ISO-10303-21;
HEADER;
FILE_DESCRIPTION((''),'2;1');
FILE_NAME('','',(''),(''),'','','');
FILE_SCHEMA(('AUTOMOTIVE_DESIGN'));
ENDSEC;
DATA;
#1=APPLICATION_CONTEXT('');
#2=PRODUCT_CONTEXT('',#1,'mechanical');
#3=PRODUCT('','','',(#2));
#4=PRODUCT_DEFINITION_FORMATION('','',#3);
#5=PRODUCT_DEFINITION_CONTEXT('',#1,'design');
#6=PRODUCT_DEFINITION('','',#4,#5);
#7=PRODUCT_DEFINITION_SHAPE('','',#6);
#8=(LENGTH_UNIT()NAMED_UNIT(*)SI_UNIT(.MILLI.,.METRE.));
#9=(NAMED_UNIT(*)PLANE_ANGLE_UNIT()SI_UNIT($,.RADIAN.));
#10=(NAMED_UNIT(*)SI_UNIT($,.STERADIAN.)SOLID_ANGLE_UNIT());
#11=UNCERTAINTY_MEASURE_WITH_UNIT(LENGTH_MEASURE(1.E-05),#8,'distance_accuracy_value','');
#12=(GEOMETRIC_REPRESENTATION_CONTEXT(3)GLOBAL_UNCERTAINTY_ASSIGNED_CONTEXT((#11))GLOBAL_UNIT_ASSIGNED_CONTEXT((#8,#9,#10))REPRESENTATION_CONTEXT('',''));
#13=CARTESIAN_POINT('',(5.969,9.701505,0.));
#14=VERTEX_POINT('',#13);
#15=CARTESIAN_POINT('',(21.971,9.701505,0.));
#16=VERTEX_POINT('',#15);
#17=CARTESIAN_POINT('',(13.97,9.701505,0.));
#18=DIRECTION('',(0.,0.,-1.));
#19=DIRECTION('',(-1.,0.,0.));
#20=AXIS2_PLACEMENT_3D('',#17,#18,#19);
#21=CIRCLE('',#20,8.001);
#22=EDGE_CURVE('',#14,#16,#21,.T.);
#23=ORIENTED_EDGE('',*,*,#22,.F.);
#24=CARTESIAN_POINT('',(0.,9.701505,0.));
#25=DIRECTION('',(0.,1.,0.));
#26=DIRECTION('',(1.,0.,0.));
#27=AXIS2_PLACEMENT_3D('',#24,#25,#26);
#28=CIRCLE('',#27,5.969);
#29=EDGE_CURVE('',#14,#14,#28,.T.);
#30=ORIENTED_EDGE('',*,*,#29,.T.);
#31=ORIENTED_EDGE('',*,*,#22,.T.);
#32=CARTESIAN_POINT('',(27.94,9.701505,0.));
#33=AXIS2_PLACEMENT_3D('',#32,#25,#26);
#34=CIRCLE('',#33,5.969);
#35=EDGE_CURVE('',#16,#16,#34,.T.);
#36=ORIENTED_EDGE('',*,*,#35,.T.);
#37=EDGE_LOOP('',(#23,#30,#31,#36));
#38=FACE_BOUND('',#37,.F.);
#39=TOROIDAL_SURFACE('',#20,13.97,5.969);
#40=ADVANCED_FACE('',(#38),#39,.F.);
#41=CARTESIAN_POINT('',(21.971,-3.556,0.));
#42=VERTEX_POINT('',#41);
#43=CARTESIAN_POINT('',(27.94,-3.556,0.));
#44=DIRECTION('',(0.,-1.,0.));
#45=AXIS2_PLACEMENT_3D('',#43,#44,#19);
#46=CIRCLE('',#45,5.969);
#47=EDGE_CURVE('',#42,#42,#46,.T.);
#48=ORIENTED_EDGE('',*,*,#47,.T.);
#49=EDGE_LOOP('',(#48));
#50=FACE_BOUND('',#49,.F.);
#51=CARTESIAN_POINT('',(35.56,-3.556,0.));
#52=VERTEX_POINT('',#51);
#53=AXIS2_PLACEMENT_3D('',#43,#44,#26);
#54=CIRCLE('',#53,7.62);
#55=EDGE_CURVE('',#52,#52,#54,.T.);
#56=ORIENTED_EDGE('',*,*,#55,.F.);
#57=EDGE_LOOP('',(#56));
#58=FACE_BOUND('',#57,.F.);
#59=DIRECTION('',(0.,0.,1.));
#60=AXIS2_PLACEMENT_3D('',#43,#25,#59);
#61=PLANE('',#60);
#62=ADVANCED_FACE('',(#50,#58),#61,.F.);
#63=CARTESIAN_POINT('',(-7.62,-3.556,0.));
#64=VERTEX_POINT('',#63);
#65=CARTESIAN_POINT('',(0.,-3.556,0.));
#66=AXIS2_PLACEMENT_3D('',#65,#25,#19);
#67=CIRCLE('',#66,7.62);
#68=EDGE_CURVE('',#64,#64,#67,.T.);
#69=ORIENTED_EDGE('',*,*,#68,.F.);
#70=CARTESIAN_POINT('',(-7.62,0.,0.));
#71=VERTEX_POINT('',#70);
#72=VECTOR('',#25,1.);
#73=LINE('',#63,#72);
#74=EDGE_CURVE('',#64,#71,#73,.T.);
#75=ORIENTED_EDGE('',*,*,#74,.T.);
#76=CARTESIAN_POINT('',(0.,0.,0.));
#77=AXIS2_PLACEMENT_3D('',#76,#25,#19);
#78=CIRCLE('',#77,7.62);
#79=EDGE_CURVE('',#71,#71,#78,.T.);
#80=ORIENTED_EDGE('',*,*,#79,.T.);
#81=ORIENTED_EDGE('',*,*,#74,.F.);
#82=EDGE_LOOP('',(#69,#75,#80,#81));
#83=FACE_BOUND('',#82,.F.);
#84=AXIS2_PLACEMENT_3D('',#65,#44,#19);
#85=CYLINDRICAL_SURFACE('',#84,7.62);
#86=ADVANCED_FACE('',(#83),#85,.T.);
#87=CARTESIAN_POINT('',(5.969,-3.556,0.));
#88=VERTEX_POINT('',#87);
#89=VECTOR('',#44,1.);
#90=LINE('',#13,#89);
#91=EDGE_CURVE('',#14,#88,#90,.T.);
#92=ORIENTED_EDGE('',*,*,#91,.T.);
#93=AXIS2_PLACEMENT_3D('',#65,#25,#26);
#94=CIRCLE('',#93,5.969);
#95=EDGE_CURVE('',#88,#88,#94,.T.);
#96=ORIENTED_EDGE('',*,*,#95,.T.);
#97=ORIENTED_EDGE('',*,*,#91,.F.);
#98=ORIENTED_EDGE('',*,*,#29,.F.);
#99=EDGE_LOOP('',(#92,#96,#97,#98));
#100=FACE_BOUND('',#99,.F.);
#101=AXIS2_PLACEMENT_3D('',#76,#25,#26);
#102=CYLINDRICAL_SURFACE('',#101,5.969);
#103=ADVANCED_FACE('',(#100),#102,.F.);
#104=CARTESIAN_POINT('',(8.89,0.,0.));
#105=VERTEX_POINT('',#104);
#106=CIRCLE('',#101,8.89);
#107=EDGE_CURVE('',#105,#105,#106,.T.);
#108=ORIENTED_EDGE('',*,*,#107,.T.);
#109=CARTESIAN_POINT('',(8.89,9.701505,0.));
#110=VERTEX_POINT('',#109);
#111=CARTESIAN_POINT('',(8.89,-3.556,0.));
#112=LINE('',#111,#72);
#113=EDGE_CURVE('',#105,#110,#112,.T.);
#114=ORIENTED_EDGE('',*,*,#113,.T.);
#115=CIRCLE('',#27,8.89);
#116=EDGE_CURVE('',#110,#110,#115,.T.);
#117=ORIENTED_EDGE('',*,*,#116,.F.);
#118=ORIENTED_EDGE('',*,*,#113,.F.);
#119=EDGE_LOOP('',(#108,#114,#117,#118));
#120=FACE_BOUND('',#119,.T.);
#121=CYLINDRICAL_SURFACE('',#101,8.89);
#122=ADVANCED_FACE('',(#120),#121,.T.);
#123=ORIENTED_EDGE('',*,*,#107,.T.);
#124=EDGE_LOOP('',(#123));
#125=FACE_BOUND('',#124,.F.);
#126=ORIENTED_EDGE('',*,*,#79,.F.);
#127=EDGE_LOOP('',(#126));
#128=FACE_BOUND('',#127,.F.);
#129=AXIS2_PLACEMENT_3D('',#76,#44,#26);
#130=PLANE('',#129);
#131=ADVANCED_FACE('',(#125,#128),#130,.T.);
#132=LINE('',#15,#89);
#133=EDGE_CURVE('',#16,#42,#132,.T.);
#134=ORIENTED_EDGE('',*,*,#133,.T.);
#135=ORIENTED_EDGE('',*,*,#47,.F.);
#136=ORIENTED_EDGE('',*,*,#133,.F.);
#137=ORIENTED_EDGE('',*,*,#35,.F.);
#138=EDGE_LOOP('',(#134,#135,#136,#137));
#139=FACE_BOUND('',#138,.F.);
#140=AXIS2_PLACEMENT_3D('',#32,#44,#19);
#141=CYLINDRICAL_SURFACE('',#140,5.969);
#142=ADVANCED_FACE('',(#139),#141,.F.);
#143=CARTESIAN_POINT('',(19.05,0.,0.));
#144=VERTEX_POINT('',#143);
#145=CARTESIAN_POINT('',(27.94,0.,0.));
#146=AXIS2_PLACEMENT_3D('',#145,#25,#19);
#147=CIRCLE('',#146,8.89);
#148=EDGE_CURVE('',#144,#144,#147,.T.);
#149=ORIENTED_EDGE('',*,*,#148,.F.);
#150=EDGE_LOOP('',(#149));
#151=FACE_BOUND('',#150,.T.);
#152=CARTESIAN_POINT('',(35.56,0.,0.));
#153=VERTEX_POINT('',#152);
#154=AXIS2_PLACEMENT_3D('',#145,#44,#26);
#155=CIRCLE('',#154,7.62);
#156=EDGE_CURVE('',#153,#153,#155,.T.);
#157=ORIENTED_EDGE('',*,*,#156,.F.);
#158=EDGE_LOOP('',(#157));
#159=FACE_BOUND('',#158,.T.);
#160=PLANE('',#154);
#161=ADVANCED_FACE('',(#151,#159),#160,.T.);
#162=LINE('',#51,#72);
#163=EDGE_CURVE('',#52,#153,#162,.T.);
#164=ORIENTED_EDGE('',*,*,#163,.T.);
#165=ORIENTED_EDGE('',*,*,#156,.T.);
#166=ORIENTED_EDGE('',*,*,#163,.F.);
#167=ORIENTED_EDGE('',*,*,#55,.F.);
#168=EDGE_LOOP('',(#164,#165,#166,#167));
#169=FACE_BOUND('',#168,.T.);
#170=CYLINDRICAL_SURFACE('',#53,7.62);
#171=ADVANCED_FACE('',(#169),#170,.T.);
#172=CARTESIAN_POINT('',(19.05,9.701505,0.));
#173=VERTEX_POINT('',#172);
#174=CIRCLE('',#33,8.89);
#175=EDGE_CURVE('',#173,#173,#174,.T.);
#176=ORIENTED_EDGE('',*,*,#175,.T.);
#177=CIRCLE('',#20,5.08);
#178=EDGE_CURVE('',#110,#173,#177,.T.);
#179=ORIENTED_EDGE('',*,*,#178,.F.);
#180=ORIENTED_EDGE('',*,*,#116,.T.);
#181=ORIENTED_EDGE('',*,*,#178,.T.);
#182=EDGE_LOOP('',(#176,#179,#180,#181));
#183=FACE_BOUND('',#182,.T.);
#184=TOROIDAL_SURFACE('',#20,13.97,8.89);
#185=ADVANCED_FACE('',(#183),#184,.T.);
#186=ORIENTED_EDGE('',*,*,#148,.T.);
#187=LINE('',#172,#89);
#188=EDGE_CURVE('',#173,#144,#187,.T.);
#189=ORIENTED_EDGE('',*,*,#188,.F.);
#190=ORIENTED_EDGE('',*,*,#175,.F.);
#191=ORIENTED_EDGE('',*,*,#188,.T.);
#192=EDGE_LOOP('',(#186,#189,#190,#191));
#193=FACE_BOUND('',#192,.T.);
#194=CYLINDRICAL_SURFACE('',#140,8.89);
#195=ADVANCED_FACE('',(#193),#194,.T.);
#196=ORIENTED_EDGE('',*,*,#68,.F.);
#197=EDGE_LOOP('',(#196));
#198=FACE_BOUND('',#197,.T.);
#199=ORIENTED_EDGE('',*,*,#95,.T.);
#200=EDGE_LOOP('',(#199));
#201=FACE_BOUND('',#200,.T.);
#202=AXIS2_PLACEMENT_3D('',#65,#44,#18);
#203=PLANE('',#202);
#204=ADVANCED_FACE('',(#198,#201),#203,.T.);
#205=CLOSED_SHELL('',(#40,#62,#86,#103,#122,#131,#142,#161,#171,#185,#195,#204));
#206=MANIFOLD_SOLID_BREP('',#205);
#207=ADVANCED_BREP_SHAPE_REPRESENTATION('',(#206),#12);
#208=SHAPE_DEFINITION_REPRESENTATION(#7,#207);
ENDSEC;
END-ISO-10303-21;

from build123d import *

# Parameters (mm, degrees)
F1_R     = 8.89
F1_R_2   = 5.969
F3_DEPTH = 3.556
F5_R     = 8.89
F5_R_2   = 7.62
F7_DEPTH = 3.556


# Not quite as in the source:
# - a feature of the source that left no trace in its solid (it failed there, or was rolled back) is left out
# - a pattern or mirror of a feature is missing from the dataset's text; its kind, count and spacing are read off the source's solid


with BuildPart() as f2:
    # F2: sweep along a path in F0
    with BuildLine(Plane.XY) as f2_path:
        Line((0, 0), (0, 9.7015046))
        ThreePointArc((0, 9.7015046), (13.97, 23.6715046), (27.94, 9.7015046))
        Line((27.94, 9.7015046), (27.94, 0))
        Line((27.94, 0), (27.94, -3.556))
    # F1 (on Front) → F2 (sweep)
    with BuildSketch(Plane.XZ):
        Circle(F1_R)
        Circle(F1_R_2, mode=Mode.SUBTRACT)
    sweep(path=f2_path.line)

    # F3 (add): a face of the model
    f3_faces = [f2.faces().sort_by_distance(p)[0] for p in [
        (-8.6385528286, 0, 0),
    ]]
    extrude(f3_faces, amount=F3_DEPTH)

    # F5 (on face) → F7 (cut)
    with BuildSketch(Plane.XZ.offset(3.556)):
        with Locations((27.94, 0)):
            Circle(F5_R)
        with Locations((27.94, 0)):
            Circle(F5_R_2, mode=Mode.SUBTRACT)
    f7 = extrude(amount=-F7_DEPTH, mode=Mode.SUBTRACT)

    # F7_copies: F7 across plane
    add(f7.mirror(Plane(origin=(13.97, 0, 0), x_dir=(0, 0, -1), z_dir=(-1, 0, 0))), mode=Mode.SUBTRACT)


solid = f2.part
